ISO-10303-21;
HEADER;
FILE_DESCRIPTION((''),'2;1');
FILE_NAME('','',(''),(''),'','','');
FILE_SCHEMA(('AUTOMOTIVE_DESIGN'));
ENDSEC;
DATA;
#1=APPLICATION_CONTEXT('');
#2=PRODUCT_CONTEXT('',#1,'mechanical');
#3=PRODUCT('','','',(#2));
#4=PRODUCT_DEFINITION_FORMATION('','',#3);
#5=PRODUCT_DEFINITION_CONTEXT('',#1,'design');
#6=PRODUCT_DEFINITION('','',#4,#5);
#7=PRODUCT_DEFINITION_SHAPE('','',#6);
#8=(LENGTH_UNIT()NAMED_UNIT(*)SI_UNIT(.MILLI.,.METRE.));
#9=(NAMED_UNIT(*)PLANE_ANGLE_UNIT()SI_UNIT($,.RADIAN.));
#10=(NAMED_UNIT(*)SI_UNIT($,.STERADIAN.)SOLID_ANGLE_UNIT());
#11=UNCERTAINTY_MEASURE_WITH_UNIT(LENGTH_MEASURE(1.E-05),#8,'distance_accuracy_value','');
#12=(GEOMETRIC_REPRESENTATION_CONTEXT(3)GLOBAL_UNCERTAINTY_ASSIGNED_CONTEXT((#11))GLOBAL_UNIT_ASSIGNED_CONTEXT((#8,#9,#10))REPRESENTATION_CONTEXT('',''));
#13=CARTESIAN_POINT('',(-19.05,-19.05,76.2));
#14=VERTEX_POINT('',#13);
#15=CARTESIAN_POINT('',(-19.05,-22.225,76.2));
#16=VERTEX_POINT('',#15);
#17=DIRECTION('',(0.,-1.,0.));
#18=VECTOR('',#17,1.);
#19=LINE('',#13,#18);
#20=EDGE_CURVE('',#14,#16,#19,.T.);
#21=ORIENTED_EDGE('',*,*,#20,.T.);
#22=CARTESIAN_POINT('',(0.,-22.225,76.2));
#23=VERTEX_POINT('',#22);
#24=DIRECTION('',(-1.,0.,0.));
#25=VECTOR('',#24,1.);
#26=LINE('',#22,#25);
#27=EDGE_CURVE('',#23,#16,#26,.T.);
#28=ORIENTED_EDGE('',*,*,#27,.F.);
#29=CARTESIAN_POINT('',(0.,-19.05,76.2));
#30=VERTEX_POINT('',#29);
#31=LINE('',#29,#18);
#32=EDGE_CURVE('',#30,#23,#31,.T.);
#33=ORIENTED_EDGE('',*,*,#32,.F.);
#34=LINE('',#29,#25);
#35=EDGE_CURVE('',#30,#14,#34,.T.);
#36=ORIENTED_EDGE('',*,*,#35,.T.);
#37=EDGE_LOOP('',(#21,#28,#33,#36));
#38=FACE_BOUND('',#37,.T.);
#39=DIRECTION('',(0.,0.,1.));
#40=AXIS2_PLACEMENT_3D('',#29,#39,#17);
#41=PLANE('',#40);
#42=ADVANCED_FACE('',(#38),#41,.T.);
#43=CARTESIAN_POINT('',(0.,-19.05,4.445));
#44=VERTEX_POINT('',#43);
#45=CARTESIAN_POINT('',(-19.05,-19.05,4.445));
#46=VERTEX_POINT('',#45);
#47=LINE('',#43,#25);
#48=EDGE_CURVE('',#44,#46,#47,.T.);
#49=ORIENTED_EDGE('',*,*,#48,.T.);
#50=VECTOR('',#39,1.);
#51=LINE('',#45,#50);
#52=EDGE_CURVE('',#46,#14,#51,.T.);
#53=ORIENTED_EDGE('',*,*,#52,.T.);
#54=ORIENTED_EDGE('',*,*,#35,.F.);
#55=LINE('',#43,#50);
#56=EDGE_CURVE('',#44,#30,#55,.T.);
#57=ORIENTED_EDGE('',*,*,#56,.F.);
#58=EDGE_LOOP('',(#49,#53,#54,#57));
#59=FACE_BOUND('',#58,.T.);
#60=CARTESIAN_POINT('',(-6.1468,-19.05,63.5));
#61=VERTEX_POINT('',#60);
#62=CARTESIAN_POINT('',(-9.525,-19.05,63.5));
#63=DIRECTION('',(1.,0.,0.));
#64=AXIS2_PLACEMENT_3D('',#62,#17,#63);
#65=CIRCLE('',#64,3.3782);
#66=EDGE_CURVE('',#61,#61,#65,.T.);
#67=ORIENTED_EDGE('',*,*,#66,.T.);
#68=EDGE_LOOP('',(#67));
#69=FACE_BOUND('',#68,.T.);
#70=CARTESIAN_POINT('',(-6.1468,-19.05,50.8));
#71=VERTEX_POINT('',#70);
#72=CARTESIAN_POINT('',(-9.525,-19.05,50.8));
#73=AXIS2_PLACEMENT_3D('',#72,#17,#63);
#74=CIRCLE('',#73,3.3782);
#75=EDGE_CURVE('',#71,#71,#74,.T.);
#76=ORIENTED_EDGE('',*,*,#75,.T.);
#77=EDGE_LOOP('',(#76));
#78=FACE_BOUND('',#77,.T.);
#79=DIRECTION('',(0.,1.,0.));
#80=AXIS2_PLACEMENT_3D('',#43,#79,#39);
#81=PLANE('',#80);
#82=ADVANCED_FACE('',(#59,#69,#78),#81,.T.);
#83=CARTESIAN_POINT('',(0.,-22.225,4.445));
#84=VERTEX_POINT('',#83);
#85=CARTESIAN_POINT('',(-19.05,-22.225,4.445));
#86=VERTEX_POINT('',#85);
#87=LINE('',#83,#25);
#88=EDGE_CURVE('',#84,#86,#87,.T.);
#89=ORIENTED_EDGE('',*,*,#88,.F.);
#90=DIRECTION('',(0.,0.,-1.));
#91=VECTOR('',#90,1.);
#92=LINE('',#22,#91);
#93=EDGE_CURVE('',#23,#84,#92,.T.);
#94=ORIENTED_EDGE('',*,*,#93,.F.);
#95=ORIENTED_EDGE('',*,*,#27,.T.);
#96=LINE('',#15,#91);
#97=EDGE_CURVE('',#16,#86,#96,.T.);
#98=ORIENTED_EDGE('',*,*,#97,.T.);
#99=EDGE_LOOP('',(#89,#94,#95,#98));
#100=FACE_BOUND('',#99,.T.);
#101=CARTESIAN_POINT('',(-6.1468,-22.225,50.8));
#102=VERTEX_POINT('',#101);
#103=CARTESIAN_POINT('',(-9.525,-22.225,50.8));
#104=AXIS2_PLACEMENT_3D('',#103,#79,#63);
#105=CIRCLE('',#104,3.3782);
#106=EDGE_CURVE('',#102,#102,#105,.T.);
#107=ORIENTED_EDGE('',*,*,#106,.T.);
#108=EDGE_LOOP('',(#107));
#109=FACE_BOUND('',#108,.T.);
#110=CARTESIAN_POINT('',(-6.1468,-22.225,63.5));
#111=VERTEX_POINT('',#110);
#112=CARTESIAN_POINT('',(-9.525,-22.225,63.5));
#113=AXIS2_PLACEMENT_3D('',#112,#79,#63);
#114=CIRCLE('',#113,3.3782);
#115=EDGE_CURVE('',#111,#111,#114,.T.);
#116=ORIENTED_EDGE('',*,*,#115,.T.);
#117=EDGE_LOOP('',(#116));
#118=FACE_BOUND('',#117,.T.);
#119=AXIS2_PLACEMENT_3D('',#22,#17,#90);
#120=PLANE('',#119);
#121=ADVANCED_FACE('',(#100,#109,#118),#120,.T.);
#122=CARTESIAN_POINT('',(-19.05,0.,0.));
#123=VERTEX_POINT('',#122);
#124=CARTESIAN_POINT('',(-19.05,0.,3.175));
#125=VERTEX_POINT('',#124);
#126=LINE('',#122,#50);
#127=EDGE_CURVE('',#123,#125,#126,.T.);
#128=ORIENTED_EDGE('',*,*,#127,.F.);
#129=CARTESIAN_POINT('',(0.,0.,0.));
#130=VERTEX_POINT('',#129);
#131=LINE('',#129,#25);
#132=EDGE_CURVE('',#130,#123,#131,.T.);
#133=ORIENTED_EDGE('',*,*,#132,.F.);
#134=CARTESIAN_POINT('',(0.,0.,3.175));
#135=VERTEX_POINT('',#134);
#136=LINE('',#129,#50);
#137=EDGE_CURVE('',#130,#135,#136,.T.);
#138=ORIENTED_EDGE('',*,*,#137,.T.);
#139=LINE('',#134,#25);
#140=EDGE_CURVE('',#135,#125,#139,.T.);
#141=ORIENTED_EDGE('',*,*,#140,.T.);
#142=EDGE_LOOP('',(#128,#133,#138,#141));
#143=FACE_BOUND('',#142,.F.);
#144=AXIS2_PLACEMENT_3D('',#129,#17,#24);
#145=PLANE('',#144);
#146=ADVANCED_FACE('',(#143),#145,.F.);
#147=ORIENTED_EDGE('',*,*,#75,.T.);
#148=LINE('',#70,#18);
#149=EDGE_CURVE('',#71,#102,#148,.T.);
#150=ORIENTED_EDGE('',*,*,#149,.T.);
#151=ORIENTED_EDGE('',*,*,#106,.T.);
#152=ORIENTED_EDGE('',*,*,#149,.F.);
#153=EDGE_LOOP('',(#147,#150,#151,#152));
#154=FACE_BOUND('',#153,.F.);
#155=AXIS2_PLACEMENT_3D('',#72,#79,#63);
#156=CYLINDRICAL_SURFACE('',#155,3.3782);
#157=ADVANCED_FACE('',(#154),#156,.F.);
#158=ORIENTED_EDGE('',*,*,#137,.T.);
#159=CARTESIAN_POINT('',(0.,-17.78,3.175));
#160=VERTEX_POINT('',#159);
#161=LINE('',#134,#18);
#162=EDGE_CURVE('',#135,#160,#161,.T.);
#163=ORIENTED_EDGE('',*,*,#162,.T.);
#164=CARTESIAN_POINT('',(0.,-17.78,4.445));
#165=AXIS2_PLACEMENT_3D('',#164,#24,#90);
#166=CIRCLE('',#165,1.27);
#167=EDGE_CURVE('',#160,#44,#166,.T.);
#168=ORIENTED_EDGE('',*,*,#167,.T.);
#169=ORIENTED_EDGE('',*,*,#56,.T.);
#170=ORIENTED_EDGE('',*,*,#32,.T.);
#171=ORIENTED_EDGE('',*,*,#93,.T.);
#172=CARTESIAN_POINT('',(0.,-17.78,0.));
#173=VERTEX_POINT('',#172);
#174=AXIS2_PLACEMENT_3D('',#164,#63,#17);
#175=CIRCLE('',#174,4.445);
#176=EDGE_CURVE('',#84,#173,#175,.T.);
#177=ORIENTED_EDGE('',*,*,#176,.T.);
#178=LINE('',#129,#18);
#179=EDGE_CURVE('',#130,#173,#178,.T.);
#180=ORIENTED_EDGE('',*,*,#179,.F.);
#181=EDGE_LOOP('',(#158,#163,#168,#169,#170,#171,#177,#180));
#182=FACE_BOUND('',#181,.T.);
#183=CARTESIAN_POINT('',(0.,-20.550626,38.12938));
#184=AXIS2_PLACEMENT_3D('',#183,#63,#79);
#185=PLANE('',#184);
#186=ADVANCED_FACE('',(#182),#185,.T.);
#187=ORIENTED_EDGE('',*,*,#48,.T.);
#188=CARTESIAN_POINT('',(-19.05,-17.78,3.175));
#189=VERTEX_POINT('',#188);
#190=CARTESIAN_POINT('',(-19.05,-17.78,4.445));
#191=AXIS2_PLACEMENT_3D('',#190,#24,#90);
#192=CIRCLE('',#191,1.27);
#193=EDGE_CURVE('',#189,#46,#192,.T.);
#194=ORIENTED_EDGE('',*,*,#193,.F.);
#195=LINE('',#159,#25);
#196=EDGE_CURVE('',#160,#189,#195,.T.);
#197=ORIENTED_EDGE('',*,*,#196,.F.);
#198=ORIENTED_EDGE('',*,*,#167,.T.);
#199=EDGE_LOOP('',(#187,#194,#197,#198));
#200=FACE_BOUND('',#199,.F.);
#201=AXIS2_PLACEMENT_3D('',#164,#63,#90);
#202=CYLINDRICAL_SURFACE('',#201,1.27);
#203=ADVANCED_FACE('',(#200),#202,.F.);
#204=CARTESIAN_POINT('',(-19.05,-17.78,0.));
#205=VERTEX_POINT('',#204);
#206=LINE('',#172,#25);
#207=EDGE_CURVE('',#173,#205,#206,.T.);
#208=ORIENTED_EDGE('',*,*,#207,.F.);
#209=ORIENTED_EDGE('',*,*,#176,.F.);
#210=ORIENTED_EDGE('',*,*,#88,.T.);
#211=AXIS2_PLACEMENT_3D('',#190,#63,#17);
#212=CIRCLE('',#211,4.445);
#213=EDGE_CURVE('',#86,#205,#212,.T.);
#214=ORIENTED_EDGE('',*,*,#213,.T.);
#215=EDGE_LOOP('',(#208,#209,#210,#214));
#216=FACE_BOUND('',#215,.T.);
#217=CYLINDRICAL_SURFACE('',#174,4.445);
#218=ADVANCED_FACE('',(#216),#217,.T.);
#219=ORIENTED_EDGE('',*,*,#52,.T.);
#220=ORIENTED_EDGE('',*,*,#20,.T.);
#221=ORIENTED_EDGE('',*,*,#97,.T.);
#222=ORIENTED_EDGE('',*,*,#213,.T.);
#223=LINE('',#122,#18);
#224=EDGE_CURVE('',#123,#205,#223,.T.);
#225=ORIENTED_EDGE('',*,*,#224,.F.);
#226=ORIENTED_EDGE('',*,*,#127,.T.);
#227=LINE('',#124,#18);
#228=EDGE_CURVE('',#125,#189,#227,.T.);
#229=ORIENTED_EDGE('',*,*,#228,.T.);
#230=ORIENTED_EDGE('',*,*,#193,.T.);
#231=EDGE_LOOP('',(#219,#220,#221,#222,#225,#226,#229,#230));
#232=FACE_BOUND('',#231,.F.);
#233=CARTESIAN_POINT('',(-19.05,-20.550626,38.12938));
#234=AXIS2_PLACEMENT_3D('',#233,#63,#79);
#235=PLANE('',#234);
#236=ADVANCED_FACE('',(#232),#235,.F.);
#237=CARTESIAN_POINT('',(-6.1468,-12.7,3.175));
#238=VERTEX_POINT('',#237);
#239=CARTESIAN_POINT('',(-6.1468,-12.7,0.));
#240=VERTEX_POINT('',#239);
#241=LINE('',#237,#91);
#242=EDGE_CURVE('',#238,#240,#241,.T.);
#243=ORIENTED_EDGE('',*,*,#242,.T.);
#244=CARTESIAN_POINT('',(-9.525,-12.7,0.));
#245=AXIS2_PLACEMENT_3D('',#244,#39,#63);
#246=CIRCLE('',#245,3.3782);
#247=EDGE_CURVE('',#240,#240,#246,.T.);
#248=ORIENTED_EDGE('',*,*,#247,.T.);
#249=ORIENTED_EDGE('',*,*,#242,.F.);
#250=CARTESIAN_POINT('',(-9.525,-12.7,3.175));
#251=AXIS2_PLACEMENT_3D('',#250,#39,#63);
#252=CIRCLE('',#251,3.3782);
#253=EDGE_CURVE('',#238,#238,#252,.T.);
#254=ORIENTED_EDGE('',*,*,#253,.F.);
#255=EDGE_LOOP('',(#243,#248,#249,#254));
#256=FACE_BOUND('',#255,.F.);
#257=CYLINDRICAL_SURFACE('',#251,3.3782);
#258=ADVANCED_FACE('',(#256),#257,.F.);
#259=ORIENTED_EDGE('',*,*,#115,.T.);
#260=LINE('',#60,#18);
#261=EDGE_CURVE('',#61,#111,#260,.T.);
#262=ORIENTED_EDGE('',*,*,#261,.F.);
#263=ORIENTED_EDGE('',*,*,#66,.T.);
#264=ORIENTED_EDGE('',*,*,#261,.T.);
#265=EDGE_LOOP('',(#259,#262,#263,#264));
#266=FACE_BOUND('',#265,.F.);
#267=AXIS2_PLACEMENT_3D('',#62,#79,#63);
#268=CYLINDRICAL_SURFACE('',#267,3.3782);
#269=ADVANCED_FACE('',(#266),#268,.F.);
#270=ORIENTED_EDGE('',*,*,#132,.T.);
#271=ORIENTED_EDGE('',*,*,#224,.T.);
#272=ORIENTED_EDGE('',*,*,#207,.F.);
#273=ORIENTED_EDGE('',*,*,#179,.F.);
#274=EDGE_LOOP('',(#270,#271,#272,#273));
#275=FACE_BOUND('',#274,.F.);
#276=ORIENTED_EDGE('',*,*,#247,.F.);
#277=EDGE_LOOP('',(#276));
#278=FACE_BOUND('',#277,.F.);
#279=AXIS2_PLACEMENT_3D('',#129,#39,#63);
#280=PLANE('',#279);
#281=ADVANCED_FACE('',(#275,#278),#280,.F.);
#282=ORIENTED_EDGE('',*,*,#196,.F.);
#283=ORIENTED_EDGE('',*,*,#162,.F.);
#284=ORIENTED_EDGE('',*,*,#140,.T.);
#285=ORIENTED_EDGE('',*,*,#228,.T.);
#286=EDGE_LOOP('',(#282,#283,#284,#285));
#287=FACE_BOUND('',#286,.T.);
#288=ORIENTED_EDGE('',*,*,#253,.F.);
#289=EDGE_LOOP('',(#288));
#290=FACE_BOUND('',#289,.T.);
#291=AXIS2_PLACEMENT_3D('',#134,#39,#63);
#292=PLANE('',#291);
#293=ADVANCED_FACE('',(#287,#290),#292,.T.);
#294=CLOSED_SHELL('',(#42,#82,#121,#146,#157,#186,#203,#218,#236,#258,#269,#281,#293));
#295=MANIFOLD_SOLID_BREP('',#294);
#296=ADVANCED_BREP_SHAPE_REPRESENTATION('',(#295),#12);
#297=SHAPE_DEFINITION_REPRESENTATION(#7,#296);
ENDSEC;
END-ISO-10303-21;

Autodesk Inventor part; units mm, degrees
ref_plane "YZ Plane" through (0, 0, 0) normal (1, 0, 0) x (0, 1, 0)
ref_plane "XZ Plane" through (0, 0, 0) normal (0, 1, 0) x (-1, 0, 0)
ref_plane "XY Plane" through (0, 0, 0) normal (0, 0, 1) x (1, 0, 0)
sketch "Sketch1" plane through (0, 0, 0) normal (0, 0, 1) x (1, 0, 0)
  line L0 (0, 0) -> (0, -22.225)
  line L1 (0, 0) -> (-19.05, 0)
  line L2 (-19.05, 0) -> (-19.05, -22.225)
  line L3 (-19.05, -22.225) -> (0, -22.225)
  dimension "d0" = 22.225
  dimension "d1" = 19.05
extrude "Plate1" add sketch "Sketch1" along normal blind 3.175
sketch "Sketch2" plane through (0, -19.05, 0) normal (0, -1, 0) x (1, 0, 0)
  line L0 (-19.05, 0) -> (0, 0)
  line L1 (0, 0) -> (0, 76.2)
  line L2 (0, 76.2) -> (-19.05, 76.2)
  line L3 (-19.05, 76.2) -> (-19.05, 0)
edge flange "Flange1" height 76.2 angle 90 thickness 3.175 bend radius 1.27 thickness toward (0, -1, 0) relief straight relief width 3.175 relief depth 1.5875 edges at (-9.525, -22.225, 3.175) wall of the first edge with corners at (-19.05, -19.05, 0) (0, -19.05, 0) (0, -19.05, 76.2) (-19.05, -19.05, 76.2)
bend "Bend1"
corner "Corner1"
sketch "Sketch3" plane through (0, 0, 3.175) normal (0, 0, 1) x (1, 0, 0)
  circle A0 centre (90.7515, -113.3098) radius 3.3782 projected
  circle A1 centre (90.7515, -113.3098) radius 3.3782 projected
  circle A2 centre (-9.525, -12.7) radius 3.3782 projected
extrude "Cut1" cut sketch "Sketch3" against normal blind 3.175 contours A2
sketch "Sketch4" plane through (-19.05, -19.05, 76.2) normal (0, 1, 0) x (1, 0, 0)
  line L0 (0, 0) -> (19.05, 0) projected
  line L1 (19.05, 0) -> (19.05, 71.755) projected
  line L2 (9.525, 0) -> (9.525, 12.7)
  circle A0 centre (9.525, 12.7) radius 3.3782
  line L3 (9.525, 12.7) -> (9.525, 25.4)
  circle A1 centre (9.525, 25.4) radius 3.3782
  point P0 (19.05, 76.2)
  dimension "d15" = 12.7
  dimension "d16" = 6.7564
  dimension "d17" = 12.7
  dimension "d18" = 6.7564
extrude "Cut2" cut sketch "Sketch4" against normal blind 3.175
equation "\"d13\" = Thickness"
equation "\"d19\" = Thickness"
equation "\"d3\" = BendReliefWidth"
equation "\"d4\" = BendReliefDepth"
equation "\"d5\" = MinimumRemnant"
equation "\"d6\" = BendRadius"
equation "\"d10\" = CornerReliefSize"
equation "\"d11\" = GapSize"
equation "\"d12\" = JacobiRadiusSize"
equation "\"BendRadius\" = Thickness"
equation "\"BendReliefWidth\" = Thickness"
equation "\"BendReliefDepth\" = 0.5 * Thickness"
equation "\"CornerReliefSize\" = 4 * Thickness"
equation "\"MinimumRemnant\" = 2 * Thickness"
equation "\"TransitionRadius\" = BendRadius"
equation "\"JacobiRadiusSize\" = Thickness"
equation "\"GapSize\" = Thickness"
equation "\"d2\" = BendRadius"
equation "\"Thickness\" = 3.175"
properties part number "pawl mount reinforcement"
